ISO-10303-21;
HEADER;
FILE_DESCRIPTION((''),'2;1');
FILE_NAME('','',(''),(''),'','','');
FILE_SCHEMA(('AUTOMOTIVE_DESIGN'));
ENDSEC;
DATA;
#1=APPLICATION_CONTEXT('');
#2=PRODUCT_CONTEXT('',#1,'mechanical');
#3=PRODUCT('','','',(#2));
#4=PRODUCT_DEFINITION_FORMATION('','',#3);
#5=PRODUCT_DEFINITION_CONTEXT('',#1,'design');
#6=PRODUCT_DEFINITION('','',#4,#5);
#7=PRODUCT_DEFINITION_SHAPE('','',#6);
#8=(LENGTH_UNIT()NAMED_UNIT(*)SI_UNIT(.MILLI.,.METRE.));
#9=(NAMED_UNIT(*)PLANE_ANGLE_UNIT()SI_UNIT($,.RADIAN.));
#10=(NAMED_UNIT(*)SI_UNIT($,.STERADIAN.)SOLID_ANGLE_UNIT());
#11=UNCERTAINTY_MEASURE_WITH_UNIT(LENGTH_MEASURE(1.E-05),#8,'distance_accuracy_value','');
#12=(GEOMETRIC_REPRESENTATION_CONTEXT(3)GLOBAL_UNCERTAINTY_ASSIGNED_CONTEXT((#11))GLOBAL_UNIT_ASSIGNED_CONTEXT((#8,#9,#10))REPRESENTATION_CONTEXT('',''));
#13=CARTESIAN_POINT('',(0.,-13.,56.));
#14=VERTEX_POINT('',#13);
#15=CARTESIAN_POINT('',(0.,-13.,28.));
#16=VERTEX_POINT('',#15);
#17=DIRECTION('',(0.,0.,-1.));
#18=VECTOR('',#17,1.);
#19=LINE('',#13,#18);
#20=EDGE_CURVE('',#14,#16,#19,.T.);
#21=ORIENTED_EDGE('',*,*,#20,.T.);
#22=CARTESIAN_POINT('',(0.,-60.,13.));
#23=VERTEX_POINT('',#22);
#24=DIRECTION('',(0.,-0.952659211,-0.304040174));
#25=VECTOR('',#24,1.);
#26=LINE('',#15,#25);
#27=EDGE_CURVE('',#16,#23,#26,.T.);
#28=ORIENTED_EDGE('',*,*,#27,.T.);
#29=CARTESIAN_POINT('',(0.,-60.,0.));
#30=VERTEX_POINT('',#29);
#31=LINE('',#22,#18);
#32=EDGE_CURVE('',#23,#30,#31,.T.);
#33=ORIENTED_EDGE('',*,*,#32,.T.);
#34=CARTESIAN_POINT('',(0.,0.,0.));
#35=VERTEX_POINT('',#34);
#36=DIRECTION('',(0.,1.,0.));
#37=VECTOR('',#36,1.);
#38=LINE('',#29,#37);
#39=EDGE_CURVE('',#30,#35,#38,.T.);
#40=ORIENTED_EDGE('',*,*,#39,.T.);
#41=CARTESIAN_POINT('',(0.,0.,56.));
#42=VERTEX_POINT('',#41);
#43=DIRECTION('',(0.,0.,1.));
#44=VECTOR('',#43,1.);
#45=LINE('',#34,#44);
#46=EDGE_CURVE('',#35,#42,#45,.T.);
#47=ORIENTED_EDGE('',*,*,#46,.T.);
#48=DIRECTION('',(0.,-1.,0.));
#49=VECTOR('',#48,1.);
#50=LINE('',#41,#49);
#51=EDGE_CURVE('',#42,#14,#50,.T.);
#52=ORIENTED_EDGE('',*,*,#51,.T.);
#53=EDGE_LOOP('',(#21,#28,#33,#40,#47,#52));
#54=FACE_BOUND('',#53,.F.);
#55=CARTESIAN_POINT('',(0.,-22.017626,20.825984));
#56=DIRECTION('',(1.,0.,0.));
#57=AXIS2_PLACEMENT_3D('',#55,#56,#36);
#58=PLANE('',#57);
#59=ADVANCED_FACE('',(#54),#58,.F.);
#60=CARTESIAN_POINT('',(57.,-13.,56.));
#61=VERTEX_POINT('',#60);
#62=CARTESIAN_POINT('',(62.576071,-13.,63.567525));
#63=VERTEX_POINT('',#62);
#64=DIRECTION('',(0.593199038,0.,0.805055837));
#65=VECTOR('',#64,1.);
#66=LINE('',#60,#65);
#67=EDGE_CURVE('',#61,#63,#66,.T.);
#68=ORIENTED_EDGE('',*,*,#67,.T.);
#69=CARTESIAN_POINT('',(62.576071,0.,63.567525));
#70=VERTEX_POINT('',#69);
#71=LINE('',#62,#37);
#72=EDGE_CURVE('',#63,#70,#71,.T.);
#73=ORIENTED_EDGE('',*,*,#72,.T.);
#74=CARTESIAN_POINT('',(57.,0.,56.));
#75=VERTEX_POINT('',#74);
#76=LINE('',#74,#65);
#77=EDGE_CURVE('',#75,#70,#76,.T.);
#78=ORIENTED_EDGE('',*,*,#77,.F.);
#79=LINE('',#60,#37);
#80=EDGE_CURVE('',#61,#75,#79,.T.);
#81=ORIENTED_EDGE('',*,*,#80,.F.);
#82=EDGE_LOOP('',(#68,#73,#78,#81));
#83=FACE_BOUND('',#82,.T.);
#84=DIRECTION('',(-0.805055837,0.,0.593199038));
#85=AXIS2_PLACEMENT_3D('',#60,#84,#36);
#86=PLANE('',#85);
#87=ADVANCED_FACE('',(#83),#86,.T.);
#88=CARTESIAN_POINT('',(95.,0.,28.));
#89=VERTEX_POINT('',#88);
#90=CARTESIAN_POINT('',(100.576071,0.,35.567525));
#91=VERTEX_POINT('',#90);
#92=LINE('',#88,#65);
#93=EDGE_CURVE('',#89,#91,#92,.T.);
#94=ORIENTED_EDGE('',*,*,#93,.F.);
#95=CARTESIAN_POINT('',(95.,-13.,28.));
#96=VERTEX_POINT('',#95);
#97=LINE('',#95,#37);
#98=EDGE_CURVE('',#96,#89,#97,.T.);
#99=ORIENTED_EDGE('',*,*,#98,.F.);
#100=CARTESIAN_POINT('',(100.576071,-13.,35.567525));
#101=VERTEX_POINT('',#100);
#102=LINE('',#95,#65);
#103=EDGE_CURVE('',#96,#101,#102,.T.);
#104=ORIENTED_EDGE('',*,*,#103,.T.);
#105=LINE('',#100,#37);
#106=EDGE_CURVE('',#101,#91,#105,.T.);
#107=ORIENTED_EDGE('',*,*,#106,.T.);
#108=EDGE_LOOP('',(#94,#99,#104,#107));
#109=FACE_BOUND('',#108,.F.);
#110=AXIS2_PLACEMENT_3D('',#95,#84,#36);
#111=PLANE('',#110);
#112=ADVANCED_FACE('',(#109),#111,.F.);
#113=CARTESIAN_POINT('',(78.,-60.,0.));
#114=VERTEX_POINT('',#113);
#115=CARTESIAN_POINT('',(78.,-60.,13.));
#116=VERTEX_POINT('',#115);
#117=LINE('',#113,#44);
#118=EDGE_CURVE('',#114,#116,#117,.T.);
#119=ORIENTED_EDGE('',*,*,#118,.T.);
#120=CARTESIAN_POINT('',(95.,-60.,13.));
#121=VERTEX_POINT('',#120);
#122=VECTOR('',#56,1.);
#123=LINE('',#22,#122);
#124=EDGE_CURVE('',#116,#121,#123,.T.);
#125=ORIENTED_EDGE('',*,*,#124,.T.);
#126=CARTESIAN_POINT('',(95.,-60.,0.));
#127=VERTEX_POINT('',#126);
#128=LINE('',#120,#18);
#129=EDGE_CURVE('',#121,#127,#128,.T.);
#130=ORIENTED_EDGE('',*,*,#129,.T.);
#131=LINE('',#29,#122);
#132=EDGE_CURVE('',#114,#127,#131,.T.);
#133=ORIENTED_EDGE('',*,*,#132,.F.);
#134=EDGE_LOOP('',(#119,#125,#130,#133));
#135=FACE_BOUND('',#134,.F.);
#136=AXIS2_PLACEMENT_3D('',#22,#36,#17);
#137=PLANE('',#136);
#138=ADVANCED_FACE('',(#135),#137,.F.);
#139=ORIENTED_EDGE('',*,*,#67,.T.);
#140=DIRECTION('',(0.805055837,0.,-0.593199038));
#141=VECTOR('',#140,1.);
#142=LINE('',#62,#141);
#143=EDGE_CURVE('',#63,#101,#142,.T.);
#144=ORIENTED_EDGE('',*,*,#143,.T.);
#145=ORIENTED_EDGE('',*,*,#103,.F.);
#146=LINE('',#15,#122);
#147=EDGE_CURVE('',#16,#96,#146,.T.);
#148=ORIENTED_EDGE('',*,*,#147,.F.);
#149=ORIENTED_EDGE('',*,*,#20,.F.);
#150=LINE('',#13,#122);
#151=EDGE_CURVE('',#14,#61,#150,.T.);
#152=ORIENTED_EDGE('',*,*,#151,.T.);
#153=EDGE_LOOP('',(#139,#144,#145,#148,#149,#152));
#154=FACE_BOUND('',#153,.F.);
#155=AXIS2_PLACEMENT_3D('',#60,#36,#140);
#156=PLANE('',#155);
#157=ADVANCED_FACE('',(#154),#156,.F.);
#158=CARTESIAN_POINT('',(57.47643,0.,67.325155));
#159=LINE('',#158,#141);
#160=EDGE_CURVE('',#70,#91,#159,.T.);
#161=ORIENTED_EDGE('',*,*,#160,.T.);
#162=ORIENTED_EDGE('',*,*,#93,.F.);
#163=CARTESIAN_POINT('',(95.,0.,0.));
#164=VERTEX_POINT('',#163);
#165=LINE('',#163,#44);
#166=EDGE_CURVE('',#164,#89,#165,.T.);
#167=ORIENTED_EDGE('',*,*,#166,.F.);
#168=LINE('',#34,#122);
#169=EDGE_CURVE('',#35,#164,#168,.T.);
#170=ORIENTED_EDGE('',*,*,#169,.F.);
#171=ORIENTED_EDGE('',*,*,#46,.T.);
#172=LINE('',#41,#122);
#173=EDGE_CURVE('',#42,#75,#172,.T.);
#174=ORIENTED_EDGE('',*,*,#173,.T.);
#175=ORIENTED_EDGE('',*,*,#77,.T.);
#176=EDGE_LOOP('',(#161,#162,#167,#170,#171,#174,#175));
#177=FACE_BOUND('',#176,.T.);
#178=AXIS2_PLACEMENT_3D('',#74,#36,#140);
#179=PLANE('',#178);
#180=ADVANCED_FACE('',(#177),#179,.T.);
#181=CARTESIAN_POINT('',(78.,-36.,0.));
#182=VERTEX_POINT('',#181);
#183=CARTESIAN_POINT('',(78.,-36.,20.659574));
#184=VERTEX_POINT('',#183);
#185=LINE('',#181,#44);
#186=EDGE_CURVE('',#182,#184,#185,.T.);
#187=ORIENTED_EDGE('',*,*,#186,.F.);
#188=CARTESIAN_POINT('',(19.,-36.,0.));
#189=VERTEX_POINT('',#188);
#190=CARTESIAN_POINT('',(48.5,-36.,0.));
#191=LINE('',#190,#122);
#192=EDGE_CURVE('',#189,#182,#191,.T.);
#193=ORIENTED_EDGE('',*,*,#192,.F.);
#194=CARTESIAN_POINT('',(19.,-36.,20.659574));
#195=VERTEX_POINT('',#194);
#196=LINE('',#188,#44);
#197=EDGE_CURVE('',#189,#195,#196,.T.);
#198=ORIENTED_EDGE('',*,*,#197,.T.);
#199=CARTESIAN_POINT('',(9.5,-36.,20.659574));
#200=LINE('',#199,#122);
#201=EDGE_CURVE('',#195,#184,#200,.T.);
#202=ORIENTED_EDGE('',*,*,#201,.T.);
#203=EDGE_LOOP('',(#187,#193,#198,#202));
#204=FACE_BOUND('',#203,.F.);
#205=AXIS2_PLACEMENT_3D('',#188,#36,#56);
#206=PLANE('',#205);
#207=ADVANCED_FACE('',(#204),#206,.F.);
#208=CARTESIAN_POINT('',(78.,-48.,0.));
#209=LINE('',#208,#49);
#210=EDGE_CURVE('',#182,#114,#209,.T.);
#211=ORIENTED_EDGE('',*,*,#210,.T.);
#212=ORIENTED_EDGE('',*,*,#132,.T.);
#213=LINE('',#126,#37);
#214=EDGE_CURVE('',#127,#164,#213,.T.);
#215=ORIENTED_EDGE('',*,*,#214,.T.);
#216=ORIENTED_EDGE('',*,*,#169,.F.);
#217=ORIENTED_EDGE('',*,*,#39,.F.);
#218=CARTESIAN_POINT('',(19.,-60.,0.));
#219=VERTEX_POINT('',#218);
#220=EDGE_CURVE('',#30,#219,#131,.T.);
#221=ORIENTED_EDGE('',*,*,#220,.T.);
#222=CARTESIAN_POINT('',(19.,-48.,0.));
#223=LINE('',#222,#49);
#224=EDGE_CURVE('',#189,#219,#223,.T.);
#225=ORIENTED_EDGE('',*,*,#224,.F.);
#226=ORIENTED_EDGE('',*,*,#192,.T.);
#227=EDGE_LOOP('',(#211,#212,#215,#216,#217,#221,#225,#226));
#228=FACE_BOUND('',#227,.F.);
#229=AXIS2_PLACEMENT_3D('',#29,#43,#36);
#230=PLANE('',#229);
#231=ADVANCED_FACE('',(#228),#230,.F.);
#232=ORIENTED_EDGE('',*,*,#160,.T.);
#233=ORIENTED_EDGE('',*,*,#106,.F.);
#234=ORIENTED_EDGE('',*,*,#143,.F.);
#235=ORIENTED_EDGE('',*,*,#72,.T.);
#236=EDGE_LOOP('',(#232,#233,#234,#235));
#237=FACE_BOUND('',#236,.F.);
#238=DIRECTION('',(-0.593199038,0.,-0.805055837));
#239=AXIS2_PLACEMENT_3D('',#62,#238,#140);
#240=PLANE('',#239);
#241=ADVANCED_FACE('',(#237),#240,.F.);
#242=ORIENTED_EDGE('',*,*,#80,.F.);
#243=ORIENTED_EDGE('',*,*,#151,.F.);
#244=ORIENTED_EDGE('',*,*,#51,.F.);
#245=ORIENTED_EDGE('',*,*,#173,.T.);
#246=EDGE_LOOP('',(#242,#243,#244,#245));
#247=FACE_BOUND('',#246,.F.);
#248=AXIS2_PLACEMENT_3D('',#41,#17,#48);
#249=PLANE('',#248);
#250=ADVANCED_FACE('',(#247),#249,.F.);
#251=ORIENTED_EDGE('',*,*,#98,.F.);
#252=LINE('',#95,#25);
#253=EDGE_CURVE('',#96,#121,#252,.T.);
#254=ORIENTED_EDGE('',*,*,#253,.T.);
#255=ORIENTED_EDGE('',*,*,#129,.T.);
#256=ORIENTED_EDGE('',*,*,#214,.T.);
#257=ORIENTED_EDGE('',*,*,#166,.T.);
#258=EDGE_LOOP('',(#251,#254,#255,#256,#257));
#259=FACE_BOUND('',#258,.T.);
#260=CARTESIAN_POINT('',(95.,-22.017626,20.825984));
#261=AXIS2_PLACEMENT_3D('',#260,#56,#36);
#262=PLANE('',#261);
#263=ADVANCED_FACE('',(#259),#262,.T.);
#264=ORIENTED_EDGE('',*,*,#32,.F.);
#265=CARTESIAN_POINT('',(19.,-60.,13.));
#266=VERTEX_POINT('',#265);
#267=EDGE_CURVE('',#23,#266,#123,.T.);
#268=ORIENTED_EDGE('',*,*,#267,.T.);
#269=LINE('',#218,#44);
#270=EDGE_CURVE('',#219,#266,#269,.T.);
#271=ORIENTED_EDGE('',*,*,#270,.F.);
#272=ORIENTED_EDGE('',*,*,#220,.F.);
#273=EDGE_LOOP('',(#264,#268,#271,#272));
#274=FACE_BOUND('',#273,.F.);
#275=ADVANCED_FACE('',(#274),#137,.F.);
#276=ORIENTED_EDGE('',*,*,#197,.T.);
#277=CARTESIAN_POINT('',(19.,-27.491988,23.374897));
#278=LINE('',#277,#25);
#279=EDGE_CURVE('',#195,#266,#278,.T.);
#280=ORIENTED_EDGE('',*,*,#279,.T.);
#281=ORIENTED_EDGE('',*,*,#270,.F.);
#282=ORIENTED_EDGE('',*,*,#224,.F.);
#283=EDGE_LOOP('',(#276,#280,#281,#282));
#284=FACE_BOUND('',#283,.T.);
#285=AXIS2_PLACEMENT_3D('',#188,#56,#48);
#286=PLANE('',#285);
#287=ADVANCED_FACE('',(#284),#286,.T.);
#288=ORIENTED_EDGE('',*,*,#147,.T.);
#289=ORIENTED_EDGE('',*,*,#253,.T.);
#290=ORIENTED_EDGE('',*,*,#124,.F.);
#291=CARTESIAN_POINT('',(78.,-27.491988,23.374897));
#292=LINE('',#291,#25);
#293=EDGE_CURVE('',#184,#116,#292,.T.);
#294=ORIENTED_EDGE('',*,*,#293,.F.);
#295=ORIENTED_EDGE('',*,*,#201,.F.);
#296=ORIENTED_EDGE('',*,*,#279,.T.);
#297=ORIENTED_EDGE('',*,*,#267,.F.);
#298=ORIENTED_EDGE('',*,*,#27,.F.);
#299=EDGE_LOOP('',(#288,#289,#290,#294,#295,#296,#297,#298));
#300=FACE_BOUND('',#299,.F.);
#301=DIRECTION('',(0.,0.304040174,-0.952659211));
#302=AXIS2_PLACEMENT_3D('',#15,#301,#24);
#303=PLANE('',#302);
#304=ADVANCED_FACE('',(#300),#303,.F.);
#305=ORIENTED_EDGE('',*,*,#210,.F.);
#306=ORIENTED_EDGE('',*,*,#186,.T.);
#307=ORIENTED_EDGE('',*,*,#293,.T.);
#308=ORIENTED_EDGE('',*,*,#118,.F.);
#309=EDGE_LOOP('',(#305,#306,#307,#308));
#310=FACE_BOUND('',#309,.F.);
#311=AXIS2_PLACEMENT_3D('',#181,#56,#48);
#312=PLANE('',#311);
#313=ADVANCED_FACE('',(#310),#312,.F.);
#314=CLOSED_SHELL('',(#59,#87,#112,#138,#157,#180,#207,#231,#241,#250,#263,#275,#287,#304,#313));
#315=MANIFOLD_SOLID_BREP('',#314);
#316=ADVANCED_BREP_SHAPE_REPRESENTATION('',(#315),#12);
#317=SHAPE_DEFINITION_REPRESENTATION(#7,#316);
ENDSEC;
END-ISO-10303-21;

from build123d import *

# Parameters (mm, degrees)
F1_DEPTH = 95
F3_DEPTH = 13.001
F4_W     = 59
F4_H     = 24
F5_DEPTH = 56.001
F6_DEPTH = 9.4


# Not quite as in the source:
# - a feature names something its author has since deleted; it is built from what else it names


with BuildPart() as f1:
    # F0 (on Right) → F1 (new body)
    with BuildSketch(Plane.YZ):
        Polygon((-60, 13), (-60, 0), (0, 0), (0, 56), (-13, 56), (-13, 28), align=None)
    extrude(amount=F1_DEPTH)

    # F2 (on face) → F3 (cut, through all)
    with BuildSketch(Plane.XZ.offset(13)):
        Polygon((95, 56), (57, 56), (95, 28), align=None)
    extrude(amount=-F3_DEPTH, mode=Mode.SUBTRACT)

    # F4 (on face) → F5 (cut, through all)
    with BuildSketch(Plane(origin=(0, 0, 0), x_dir=(1, 0, 0), z_dir=(0, 0, -1))):
        with Locations((48.5, 48)):
            Rectangle(F4_W, F4_H)
    extrude(amount=-F5_DEPTH, mode=Mode.SUBTRACT)

    # F6 (add): a face of the model
    f6_faces = [f1.faces().sort_by_distance(p)[0] for p in [
        (76, -6.5, 42),
    ]]
    extrude(f6_faces, amount=F6_DEPTH)


solid = f1.part
